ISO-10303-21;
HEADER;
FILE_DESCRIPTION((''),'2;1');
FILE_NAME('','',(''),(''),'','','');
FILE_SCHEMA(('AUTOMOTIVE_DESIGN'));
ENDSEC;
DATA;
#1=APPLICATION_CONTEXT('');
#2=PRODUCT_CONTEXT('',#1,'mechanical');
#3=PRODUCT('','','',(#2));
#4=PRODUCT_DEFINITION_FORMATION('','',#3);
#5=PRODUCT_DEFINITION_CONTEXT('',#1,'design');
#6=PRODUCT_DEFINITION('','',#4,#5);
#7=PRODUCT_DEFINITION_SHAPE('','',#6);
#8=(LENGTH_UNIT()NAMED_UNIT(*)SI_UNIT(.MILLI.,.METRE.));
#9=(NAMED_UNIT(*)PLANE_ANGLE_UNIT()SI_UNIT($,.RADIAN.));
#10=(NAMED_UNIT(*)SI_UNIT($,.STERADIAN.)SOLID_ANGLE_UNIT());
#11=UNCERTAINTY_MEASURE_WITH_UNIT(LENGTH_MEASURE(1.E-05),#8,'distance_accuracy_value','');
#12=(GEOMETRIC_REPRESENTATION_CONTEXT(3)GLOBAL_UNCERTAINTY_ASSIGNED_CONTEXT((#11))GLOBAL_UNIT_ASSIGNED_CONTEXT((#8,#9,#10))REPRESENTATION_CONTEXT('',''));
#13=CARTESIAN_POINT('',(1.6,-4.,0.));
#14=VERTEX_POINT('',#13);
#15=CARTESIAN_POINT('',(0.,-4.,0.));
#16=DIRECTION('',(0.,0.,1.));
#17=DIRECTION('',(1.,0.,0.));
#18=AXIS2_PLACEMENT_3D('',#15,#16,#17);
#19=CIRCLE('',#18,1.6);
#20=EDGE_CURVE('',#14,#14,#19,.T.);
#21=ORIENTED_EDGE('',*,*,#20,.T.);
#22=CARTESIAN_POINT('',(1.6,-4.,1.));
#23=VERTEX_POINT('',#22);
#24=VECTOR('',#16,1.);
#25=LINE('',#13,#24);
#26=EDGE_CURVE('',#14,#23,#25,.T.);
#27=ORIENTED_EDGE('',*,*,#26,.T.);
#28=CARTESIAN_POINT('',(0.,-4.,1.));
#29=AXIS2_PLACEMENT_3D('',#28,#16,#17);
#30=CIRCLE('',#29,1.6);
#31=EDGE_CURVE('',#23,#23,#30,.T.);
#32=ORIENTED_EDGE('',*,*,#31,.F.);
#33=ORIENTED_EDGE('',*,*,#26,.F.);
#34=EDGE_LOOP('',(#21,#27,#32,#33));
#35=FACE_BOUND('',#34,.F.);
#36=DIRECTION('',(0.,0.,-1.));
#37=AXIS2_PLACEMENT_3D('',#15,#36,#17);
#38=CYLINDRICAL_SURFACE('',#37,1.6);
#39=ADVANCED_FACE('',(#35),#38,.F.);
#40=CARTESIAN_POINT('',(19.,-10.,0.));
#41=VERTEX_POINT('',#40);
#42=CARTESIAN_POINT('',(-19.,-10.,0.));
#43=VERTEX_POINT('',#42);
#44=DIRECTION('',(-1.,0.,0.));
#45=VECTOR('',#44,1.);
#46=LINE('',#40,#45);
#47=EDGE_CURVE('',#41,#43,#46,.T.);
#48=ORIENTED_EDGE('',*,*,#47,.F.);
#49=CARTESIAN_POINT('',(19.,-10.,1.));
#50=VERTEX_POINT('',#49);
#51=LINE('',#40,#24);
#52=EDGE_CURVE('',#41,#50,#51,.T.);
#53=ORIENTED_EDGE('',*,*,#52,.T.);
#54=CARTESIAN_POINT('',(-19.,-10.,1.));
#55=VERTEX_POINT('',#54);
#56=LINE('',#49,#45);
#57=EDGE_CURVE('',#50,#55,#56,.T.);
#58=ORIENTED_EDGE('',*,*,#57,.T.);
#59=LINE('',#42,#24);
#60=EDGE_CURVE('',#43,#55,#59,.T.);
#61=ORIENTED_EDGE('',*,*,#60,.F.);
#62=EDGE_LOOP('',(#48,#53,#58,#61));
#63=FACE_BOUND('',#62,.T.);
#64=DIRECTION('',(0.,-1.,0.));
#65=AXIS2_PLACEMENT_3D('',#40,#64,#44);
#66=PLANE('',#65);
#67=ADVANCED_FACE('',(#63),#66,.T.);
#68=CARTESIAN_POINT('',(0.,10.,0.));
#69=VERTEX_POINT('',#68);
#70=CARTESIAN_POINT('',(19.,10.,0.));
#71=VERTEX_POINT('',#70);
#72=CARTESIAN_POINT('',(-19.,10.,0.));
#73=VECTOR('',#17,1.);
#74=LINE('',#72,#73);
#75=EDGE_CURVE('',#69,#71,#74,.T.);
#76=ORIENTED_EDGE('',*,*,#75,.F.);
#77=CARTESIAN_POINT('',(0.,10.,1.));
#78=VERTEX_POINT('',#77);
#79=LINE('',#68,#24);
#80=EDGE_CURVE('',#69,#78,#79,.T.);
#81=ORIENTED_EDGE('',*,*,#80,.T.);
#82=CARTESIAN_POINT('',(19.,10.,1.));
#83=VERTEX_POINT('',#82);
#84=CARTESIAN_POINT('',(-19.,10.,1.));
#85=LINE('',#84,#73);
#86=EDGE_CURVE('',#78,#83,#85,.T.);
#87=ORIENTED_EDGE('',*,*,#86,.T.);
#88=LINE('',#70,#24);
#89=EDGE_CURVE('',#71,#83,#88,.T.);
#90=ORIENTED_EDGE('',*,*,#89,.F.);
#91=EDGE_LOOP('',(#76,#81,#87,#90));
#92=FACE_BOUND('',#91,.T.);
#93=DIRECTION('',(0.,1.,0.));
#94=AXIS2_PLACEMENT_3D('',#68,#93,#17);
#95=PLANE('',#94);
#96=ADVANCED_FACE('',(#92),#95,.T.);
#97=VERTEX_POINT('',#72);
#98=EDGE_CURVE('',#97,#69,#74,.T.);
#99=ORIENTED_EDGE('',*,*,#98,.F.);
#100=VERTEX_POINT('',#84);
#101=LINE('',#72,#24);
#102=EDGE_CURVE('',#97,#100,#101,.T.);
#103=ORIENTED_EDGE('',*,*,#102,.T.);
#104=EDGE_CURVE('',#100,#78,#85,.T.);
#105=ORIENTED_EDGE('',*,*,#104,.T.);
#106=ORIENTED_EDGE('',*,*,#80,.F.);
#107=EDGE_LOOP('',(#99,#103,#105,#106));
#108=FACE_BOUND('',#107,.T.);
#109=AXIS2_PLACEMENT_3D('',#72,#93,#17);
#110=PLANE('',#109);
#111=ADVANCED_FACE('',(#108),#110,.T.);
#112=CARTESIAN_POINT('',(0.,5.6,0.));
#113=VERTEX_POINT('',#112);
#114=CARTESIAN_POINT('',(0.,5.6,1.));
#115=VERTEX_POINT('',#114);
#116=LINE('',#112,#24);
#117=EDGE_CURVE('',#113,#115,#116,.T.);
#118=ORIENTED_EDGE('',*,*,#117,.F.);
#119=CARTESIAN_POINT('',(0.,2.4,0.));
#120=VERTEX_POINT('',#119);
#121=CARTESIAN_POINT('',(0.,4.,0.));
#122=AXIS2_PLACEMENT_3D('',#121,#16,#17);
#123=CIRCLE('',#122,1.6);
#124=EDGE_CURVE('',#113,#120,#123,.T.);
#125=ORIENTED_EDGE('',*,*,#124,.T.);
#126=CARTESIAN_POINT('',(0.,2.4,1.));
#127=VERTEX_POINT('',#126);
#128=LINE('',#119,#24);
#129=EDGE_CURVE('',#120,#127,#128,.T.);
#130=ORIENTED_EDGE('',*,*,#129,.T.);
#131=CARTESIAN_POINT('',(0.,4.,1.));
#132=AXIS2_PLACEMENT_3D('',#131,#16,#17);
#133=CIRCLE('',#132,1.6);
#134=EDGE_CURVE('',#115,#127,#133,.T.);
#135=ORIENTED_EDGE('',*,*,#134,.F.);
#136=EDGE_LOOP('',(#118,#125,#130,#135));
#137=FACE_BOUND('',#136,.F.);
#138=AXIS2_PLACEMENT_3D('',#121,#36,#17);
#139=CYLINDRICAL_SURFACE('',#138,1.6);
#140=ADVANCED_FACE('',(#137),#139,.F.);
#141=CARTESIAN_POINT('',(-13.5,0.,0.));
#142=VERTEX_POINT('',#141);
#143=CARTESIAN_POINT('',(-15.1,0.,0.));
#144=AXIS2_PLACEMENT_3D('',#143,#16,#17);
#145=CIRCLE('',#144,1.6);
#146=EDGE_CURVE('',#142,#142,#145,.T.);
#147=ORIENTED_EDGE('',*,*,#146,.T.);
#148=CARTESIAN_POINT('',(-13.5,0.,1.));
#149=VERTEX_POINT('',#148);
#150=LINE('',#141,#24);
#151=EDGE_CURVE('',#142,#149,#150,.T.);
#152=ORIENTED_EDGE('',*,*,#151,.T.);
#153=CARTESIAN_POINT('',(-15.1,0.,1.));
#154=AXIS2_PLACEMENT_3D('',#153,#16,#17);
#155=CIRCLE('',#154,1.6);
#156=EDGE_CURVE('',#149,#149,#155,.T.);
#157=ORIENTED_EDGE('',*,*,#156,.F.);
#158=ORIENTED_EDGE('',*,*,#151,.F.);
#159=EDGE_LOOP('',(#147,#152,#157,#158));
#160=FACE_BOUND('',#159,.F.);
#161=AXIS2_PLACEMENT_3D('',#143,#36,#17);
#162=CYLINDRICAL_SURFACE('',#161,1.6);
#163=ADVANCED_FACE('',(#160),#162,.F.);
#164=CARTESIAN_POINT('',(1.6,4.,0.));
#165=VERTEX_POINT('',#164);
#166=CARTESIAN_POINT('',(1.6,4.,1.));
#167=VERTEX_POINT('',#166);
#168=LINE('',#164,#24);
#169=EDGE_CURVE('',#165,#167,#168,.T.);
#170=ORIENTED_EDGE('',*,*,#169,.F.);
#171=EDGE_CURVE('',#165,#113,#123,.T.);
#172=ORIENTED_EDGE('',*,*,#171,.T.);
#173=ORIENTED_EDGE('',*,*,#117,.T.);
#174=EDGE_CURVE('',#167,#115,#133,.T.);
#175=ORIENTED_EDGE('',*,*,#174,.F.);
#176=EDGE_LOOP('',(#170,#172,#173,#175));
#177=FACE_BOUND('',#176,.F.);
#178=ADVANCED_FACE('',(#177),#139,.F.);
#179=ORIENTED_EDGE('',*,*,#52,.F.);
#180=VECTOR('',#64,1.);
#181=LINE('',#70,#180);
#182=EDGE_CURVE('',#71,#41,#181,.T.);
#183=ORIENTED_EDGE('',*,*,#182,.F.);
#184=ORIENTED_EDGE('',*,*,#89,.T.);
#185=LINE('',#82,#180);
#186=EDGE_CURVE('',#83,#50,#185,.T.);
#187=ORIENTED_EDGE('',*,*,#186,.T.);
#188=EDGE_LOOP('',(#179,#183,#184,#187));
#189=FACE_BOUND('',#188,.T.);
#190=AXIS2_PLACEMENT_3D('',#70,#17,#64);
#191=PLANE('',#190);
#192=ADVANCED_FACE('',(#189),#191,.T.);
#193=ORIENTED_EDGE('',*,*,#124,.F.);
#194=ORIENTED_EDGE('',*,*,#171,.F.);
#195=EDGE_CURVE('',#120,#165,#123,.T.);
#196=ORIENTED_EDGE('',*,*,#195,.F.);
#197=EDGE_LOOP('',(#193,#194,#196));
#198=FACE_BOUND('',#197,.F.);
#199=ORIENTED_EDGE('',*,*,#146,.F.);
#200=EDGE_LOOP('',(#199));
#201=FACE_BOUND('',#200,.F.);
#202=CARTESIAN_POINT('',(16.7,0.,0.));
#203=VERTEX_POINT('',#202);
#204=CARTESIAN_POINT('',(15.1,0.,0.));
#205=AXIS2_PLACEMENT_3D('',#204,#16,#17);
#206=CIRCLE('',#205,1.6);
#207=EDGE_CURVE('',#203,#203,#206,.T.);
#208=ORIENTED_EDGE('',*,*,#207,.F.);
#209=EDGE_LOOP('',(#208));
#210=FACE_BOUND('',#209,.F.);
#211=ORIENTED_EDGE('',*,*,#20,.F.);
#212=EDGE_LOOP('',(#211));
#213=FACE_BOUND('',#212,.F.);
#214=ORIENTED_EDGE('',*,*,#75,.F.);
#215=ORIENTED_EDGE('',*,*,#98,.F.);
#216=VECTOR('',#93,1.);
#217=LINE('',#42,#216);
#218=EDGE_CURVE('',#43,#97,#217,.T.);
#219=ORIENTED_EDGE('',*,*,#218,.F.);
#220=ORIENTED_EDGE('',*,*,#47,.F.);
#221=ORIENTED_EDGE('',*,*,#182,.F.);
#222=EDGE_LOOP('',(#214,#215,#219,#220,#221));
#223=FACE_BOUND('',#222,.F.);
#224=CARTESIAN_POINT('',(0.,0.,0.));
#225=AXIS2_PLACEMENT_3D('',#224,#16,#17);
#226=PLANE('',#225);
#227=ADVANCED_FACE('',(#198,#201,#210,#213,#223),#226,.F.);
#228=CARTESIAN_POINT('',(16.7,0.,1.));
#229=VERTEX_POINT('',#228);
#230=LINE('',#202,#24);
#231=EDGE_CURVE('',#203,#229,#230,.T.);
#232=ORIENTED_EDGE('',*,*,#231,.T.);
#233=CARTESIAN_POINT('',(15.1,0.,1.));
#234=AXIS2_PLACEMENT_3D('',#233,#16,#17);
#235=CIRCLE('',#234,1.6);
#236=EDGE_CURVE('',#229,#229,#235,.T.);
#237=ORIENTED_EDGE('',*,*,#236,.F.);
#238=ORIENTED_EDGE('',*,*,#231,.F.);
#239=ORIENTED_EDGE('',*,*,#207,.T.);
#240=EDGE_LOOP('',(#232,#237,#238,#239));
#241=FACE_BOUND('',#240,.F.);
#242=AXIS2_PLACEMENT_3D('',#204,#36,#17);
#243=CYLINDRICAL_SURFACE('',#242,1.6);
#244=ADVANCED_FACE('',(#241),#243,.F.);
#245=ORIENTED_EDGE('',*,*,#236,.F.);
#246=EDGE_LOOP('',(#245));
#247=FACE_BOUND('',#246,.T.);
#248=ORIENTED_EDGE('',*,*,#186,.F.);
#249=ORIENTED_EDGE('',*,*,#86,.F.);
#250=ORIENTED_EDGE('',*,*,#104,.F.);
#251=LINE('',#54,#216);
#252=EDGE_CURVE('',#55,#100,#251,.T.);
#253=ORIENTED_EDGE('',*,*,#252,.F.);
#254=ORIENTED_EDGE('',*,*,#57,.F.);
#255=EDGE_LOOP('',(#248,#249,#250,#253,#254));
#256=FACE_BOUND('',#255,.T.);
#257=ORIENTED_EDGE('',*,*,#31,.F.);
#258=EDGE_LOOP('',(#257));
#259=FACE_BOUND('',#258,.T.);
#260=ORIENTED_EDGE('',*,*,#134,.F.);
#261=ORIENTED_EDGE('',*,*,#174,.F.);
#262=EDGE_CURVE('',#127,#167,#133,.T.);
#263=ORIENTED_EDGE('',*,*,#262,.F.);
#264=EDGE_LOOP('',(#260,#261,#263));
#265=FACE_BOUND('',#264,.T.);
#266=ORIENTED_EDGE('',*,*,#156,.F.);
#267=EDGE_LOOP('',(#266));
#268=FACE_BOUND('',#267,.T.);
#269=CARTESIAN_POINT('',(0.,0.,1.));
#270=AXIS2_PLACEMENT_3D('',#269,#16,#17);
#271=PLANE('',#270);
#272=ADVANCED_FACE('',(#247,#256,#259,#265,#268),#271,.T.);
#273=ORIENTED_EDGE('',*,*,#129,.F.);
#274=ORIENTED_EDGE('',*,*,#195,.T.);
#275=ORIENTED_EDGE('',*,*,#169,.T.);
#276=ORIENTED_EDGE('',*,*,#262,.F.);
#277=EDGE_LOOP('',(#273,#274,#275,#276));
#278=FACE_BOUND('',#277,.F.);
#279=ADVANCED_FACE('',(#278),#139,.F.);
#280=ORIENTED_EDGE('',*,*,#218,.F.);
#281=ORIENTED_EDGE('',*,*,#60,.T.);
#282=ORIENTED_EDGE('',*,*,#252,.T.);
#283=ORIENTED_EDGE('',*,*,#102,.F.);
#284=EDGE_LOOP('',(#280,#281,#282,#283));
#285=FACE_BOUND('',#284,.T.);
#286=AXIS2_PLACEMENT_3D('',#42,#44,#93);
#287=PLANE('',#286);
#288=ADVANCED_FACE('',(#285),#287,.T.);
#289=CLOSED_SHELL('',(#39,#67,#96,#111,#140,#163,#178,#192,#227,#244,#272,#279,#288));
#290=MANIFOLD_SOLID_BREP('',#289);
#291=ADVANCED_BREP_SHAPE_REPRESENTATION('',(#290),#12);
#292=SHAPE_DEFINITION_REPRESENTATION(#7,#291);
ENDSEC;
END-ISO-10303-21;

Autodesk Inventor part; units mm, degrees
ref_plane "YZ Plane" through (0, 0, 0) normal (1, 0, 0) x (0, 1, 0)
ref_plane "XZ Plane" through (0, 0, 0) normal (0, 1, 0) x (-1, 0, 0)
ref_plane "XY Plane" through (0, 0, 0) normal (0, 0, 1) x (1, 0, 0)
sketch "Sketch1" plane through (0, 0, 0) normal (0, 0, 1) x (1, 0, 0)
  line L0 (-19, 10) -> (19, 10)
  line L1 (19, 10) -> (19, -10)
  line L2 (19, -10) -> (-19, -10)
  line L3 (-19, -10) -> (-19, 10)
  line L4 (-19, 10) -> (19, -10) construction
  line L5 (19, 10) -> (-19, -10) construction
  circle A0 centre (15.1, 0) radius 1.6
  line L6 (0, 0) -> (12.8976, 0)
  line L7 (0, 0) -> (0, 11.3109)
  circle A1 centre (-15.1, 0) radius 1.6
  circle A2 centre (0, -4) radius 1.6
  circle A3 centre (0, 4) radius 1.6
  dimension "d0" = 38
  dimension "d1" = 20
  dimension "d2" = 3.2
  dimension "d3" = 3.9
  dimension "d17" = 6
  dimension "d18" = 3.2
sketch "Sketch2" plane through (0, 0, 1) normal (0, 0, 1) x (1, 0, 0)
  line L0 (-17.5, 30) -> (-12.5, 30)
  line L1 (-7.5, 25) -> (-7.5, 10)
  line L2 (-12.5, 5) -> (-17.5, 5)
  line L3 (-22.5, 10) -> (-22.5, 25)
  line L4 (-22.5, 30) -> (-7.5, 5) construction
  line L5 (-7.5, 30) -> (-22.5, 5) construction
  line L6 (-28.3073, 0) -> (28.3073, 0)
  line L7 (0, 37.5) -> (0, -37.5)
  arc A0 (-17.5, 30) -> (-22.5, 25) centre (-17.5, 25) ccw
  arc A1 (-7.5, 25) -> (-12.5, 30) centre (-12.5, 25) ccw
  arc A2 (-12.5, 5) -> (-7.5, 10) centre (-12.5, 10) ccw
  arc A3 (-22.5, 10) -> (-17.5, 5) centre (-17.5, 10) ccw
  line L8 (17.5, 30) -> (12.5, 30)
  line L9 (7.5, 25) -> (7.5, 10)
  line L10 (12.5, 5) -> (17.5, 5)
  line L11 (22.5, 10) -> (22.5, 25)
  line L12 (22.5, 30) -> (7.5, 5) construction
  line L13 (7.5, 30) -> (22.5, 5) construction
  arc A4 (22.5, 25) -> (17.5, 30) centre (17.5, 25) ccw
  arc A5 (12.5, 30) -> (7.5, 25) centre (12.5, 25) ccw
  arc A6 (7.5, 10) -> (12.5, 5) centre (12.5, 10) ccw
  arc A7 (17.5, 5) -> (22.5, 10) centre (17.5, 10) ccw
  line L14 (-17.5, -30) -> (-12.5, -30)
  line L15 (-7.5, -25) -> (-7.5, -10)
  line L16 (-12.5, -5) -> (-17.5, -5)
  line L17 (-22.5, -10) -> (-22.5, -25)
  line L18 (-22.5, -30) -> (-7.5, -5) construction
  line L19 (-7.5, -30) -> (-22.5, -5) construction
  arc A8 (-22.5, -25) -> (-17.5, -30) centre (-17.5, -25) ccw
  arc A9 (-12.5, -30) -> (-7.5, -25) centre (-12.5, -25) ccw
  arc A10 (-7.5, -10) -> (-12.5, -5) centre (-12.5, -10) ccw
  arc A11 (-17.5, -5) -> (-22.5, -10) centre (-17.5, -10) ccw
  arc A12 (7.5, -25) -> (12.5, -30) centre (12.5, -25) ccw
  line L20 (7.5, -25) -> (7.5, -10)
  line L21 (17.5, -30) -> (12.5, -30)
  arc A13 (17.5, -30) -> (22.5, -25) centre (17.5, -25) ccw
  arc A14 (12.5, -5) -> (7.5, -10) centre (12.5, -10) ccw
  line L22 (22.5, -10) -> (22.5, -25)
  arc A15 (22.5, -10) -> (17.5, -5) centre (17.5, -10) ccw
  line L23 (7.5, -30) -> (22.5, -5) construction
  line L24 (22.5, -30) -> (7.5, -5) construction
  line L25 (12.5, -5) -> (17.5, -5)
  point P0 (0, 0)
  point P1 (-15, 17.5)
  point P2 (0, 0)
  point P3 (15, 17.5)
  point P4 (-15, -17.5)
  point P5 (15, -17.5)
  dimension "d9" = 15
  dimension "d10" = 25
  dimension "d12" = 10
  dimension "d13" = 15
  dimension "d14" = 5
extrude "Plate1" add sketch "Sketch1" along normal blind 1
equation "\"d5\" = 厚度"
equation "\"折彎半徑\" = 厚度"
equation "\"折彎離隙寬度\" = 厚度"
equation "\"折彎離隙深度\" = 0.5 * 厚度"
equation "\"轉角離隙大小\" = 4 * 厚度"
equation "\"最小剩餘\" = 2 * 厚度"
equation "\"轉移半徑\" = 折彎半徑"
equation "\"Jacobi半徑大小\" = 折彎半徑"
equation "\"間隙大小\" = 厚度"
equation "\"厚度\" = 1"
properties part number "battery_box_5V_side1" material "Aluminum"
